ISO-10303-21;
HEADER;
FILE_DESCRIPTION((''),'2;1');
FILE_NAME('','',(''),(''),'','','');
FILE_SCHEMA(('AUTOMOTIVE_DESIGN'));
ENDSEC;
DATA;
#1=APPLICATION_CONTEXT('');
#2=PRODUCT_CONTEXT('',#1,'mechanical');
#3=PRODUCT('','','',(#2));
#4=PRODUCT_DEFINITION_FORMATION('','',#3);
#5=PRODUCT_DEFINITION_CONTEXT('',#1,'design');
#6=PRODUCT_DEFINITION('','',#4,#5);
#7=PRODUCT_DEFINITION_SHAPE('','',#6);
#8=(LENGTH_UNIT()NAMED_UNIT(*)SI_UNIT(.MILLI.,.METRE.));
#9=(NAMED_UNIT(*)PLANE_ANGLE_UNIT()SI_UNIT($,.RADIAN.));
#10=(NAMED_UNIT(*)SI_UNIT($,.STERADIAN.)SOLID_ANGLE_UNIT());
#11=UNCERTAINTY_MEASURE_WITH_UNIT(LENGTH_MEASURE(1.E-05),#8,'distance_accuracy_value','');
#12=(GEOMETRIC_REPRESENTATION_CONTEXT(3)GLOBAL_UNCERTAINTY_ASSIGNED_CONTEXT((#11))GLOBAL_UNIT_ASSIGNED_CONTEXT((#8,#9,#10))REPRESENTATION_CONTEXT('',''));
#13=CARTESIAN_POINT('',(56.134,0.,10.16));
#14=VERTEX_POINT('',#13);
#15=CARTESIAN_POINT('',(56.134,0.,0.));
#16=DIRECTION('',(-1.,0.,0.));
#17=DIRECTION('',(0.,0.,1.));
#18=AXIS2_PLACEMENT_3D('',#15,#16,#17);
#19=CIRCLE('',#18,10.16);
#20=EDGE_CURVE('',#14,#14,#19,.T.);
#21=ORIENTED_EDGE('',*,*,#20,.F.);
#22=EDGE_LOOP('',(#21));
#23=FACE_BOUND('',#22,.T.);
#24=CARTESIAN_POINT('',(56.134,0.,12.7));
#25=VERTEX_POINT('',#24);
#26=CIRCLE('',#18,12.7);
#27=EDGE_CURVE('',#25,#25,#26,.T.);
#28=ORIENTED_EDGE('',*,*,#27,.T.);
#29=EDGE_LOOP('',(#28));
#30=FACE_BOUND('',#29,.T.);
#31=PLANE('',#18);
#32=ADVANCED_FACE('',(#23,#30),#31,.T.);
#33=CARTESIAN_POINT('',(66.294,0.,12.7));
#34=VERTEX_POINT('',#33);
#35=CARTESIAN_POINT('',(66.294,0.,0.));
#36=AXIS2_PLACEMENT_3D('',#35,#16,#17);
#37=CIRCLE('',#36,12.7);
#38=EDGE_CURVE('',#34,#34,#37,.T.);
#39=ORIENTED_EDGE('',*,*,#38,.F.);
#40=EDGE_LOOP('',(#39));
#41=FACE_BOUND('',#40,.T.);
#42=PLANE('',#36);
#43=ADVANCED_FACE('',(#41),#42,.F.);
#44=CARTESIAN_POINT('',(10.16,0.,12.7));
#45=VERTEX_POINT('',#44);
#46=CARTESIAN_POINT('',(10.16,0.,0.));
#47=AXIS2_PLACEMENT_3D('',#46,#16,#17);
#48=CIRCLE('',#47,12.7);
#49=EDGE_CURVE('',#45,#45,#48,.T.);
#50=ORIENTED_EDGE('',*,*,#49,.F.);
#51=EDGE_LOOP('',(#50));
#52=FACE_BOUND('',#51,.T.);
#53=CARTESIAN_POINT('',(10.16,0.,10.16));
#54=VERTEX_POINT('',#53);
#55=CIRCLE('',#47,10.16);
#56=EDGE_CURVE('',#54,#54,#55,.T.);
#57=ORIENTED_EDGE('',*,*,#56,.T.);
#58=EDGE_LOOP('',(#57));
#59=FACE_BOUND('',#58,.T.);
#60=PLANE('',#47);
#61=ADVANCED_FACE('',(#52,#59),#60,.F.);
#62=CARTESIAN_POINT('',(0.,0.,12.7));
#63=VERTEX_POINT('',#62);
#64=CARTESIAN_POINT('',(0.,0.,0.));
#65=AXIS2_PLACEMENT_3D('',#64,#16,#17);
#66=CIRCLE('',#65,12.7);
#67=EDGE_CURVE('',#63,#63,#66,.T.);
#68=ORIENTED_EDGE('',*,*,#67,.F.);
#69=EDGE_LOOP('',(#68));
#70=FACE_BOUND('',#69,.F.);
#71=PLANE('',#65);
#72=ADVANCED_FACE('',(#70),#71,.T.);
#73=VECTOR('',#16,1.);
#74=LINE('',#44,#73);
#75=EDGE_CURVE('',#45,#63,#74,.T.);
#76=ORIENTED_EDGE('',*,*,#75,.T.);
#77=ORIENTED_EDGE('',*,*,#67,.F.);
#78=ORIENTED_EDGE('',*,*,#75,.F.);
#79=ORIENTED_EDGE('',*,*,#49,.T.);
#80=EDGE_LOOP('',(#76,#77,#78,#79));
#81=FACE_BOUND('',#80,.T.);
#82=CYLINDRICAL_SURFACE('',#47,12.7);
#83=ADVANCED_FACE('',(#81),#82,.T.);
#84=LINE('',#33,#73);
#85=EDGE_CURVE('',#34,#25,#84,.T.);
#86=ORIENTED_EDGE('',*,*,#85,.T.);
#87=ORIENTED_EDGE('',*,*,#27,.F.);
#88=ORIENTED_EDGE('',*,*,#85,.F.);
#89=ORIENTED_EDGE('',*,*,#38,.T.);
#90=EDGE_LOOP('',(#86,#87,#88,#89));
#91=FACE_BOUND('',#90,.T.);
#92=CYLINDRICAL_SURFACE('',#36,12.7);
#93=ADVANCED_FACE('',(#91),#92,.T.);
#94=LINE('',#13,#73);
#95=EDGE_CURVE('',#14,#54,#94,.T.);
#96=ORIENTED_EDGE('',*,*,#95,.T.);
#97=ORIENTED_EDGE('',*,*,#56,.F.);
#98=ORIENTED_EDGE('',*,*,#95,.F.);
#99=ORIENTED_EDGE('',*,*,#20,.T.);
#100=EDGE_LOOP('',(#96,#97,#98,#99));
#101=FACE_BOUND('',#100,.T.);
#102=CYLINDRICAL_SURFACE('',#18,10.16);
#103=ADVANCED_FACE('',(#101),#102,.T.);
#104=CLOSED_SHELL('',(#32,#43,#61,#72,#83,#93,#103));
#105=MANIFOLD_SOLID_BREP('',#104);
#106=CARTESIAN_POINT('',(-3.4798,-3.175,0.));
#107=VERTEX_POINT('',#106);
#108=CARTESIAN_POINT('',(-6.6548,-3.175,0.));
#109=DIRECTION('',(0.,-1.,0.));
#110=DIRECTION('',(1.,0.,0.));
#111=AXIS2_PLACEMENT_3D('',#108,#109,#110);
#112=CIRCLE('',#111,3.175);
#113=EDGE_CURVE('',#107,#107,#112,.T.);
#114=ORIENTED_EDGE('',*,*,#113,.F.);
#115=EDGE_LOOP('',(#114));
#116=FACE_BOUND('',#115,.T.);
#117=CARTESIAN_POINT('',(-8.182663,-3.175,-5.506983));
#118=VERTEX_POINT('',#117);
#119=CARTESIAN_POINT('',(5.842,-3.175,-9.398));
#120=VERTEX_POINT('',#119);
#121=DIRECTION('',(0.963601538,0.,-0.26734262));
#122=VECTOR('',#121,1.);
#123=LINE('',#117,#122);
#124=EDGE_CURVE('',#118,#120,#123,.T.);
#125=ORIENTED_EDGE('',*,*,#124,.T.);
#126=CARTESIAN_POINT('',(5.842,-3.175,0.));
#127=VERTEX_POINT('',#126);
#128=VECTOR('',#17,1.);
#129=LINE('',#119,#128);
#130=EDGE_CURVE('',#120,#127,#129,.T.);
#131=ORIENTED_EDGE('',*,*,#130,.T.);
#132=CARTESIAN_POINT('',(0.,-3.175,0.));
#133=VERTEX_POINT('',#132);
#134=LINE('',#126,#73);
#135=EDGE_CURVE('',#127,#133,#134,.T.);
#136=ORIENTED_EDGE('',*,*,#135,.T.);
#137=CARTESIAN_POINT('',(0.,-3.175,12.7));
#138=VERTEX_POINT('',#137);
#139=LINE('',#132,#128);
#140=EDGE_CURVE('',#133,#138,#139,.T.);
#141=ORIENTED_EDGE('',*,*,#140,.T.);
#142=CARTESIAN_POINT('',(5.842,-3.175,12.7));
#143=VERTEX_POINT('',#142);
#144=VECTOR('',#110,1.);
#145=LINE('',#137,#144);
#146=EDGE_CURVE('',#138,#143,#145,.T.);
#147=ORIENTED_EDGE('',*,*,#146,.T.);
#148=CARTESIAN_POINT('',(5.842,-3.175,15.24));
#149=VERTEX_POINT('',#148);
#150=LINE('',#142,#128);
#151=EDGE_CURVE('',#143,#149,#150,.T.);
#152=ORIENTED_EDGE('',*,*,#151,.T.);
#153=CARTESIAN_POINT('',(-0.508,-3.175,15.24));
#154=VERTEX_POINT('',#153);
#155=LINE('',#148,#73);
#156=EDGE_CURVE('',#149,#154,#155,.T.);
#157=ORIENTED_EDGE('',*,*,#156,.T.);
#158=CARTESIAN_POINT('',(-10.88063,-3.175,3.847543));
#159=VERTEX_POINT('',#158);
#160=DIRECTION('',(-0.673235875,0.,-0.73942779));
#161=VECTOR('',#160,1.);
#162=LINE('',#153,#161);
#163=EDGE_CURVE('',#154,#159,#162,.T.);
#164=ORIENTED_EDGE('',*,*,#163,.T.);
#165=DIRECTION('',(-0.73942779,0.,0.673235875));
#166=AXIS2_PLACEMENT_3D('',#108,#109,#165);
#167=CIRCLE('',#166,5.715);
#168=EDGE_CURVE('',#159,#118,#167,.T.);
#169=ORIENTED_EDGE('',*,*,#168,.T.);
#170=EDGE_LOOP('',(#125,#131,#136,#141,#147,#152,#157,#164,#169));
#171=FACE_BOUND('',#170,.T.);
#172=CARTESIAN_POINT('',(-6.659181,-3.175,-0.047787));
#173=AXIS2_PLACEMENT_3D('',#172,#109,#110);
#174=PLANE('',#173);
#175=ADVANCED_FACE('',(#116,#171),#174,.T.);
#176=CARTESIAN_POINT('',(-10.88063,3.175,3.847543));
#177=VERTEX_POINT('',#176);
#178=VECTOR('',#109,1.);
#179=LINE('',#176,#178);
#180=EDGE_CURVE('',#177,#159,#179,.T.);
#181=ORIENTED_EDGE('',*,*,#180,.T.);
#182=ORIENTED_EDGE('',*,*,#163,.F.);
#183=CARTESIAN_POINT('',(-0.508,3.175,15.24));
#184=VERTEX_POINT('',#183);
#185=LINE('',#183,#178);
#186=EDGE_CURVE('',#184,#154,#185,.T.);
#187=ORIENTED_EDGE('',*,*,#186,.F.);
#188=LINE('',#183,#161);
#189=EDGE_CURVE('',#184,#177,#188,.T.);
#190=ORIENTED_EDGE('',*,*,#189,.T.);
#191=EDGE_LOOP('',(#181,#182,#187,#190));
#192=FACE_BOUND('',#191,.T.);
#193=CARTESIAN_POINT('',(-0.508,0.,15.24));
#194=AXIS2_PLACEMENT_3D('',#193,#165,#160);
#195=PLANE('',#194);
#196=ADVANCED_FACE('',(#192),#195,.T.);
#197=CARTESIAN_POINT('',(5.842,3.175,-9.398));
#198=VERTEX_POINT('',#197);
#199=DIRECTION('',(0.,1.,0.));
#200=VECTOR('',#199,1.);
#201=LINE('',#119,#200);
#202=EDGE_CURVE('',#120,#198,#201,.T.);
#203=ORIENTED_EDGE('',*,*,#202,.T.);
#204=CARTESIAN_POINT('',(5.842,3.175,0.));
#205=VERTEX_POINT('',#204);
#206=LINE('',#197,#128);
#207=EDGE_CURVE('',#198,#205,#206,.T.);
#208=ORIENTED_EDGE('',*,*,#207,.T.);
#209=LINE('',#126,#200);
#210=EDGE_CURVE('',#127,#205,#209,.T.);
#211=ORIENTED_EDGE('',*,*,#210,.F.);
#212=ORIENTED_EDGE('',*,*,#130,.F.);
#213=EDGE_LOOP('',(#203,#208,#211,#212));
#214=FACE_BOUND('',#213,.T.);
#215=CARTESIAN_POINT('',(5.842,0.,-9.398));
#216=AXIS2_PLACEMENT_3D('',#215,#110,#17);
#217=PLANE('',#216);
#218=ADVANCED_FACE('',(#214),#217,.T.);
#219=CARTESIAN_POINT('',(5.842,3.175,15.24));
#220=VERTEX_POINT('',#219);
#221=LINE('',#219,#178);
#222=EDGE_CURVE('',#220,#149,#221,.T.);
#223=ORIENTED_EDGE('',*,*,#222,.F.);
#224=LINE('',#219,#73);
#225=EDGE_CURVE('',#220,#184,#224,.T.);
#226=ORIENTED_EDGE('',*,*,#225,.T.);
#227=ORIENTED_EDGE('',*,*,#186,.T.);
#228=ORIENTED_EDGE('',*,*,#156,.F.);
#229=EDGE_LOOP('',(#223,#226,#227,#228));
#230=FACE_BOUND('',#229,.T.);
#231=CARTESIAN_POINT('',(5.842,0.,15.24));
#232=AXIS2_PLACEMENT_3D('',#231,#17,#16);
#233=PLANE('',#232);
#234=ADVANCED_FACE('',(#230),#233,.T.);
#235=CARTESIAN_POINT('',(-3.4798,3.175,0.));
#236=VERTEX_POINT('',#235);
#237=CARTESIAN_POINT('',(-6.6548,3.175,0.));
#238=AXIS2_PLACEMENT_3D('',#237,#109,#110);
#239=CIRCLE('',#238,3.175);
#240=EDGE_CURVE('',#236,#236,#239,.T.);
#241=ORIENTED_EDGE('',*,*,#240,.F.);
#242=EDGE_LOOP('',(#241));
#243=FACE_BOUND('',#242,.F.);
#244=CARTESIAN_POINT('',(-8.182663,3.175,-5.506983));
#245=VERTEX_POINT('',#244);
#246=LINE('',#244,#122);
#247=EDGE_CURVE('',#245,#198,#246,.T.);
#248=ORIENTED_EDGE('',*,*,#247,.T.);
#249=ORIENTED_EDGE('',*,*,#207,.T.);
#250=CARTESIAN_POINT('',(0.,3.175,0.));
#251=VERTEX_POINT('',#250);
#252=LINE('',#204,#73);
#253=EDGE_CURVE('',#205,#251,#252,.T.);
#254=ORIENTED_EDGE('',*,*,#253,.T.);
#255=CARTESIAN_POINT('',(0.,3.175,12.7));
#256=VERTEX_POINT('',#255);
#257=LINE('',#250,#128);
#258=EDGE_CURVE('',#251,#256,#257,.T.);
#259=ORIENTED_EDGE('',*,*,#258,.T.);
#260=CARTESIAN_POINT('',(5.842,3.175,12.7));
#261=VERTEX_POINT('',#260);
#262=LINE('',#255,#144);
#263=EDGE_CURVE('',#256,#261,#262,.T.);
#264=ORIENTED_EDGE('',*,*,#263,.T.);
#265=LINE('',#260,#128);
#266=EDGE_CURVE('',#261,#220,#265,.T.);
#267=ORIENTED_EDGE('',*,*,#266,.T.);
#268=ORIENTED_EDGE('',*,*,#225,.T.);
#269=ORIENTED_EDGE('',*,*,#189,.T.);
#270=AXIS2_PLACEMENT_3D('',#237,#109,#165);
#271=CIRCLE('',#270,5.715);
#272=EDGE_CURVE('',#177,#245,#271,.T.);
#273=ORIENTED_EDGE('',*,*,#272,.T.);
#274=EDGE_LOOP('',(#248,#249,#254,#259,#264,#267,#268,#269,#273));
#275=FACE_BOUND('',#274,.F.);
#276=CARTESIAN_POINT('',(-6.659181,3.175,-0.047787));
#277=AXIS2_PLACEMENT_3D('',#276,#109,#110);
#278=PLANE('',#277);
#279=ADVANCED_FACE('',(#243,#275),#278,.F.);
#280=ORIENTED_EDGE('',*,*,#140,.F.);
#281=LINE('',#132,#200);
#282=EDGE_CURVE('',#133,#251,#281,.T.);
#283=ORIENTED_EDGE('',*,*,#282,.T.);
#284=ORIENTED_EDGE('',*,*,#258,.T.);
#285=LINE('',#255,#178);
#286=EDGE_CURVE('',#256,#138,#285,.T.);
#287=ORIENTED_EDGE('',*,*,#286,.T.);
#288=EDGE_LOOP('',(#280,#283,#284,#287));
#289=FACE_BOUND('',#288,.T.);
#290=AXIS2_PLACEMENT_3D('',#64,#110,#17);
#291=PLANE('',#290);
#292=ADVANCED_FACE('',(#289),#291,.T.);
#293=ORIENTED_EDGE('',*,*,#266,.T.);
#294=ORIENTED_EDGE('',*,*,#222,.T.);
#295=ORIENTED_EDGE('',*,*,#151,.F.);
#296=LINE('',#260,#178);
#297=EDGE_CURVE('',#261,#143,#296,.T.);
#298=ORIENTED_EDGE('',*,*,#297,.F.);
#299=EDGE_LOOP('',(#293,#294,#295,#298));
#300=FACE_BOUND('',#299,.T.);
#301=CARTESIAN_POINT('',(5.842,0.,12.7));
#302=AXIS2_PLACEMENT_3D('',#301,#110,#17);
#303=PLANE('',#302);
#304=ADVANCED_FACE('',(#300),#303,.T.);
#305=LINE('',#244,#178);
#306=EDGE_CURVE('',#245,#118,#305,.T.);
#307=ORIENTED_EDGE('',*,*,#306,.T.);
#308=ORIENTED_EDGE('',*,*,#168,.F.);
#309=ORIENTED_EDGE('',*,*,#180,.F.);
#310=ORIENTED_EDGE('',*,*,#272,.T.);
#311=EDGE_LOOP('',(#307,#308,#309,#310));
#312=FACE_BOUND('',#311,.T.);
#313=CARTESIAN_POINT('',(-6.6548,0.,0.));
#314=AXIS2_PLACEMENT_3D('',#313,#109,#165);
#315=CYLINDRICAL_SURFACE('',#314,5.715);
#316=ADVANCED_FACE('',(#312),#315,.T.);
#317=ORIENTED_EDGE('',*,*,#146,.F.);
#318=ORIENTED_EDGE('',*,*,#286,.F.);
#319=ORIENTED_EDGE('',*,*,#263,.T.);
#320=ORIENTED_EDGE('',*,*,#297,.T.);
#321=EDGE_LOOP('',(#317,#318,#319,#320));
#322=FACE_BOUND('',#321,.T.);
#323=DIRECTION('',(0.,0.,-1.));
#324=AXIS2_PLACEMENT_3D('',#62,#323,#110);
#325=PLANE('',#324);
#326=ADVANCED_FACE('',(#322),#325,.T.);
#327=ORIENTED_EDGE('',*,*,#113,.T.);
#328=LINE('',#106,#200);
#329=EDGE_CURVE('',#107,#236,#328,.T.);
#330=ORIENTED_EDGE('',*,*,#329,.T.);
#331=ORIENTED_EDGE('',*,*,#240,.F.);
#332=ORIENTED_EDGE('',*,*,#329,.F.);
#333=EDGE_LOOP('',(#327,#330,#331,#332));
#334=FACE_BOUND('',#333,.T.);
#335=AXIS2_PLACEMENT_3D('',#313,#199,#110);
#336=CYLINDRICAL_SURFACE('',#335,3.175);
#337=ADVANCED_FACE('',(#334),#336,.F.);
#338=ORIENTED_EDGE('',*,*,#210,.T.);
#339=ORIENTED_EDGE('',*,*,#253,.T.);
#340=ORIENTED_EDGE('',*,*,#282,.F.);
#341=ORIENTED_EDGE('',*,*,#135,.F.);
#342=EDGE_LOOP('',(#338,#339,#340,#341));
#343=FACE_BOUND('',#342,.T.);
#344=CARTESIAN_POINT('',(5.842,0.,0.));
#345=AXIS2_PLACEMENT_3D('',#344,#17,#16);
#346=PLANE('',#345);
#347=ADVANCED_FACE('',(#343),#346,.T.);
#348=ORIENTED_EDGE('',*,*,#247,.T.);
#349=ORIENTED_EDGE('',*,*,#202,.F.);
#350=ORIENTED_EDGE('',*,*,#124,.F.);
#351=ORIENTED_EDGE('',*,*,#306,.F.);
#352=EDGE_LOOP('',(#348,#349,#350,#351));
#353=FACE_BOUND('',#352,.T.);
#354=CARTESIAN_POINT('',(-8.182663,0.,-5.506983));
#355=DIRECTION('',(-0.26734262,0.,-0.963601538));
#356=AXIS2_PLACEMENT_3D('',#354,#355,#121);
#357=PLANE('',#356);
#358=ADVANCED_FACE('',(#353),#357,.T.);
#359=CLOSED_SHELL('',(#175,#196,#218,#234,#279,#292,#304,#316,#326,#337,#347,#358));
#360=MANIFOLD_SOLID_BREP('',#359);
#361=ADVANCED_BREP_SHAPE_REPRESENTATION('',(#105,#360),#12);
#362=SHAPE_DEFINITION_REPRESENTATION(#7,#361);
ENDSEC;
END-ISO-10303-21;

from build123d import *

# Parameters (mm, degrees)
F0_W     = 5.842
F0_H     = 12.7
F0_R     = 3.175
F2_DEPTH = 6.35
F4_DEPTH = 3.175


# Not quite as in the source:
# - a feature of the source that left no trace in its solid (it failed there, or was rolled back) is left out


with BuildPart() as f1:
    # F0 (on Front) → F1 (revolve)
    with BuildSketch(Plane.XZ):
        with Locations((2.921, 6.35)):
            Rectangle(F0_W, F0_H)
        Polygon((5.842, 12.7), (5.842, 0), (66.294, 0), (66.294, 12.7), (56.134, 12.7), (56.134, 10.16), (10.16, 10.16), (10.16, 12.7), align=None)
    revolve(axis=Axis((33.147, 0, 0), (-1, 0, 0)))


with BuildPart() as f2:
    # F0 (on Front) → F2 (new body)
    with BuildSketch(Plane.XZ):
        with BuildLine():
            Line((-0.9398, 0), (0, 0))
            Line((0, 0), (0, 12.7))
            Line((0, 12.7), (5.842, 12.7))
            Line((5.842, 12.7), (5.842, 15.24))
            Line((5.842, 15.24), (-0.508, 15.24))
            Line((-0.508, 15.24), (-10.8806298187, 3.8475430269))
            ThreePointArc((-10.8806298187, 3.8475430269), (-4.5919612295, 5.3297205562), (-0.9398, 0))
        make_face()
        with BuildLine():
            ThreePointArc((-8.1826630726, -5.5069827884), (-3.1957909266, -4.5493385486), (-0.9398, 0))
            ThreePointArc((-0.9398, 0), (-4.5919612295, 5.3297205562), (-10.8806298187, 3.8475430269))
            ThreePointArc((-10.8806298187, 3.8475430269), (-12.1459778134, -1.5837270034), (-8.1826630726, -5.5069827884))
        make_face()
        with Locations((-6.6548, 0)):
            Circle(F0_R, mode=Mode.SUBTRACT)
        with BuildLine():
            Line((5.842, 0), (0, 0))
            Line((0, 0), (-0.9398, 0))
            ThreePointArc((-0.9398, 0), (-3.1957909266, -4.5493385486), (-8.1826630726, -5.5069827884))
            Line((-8.1826630726, -5.5069827884), (5.842, -9.398))
            Line((5.842, -9.398), (5.842, 0))
        make_face()
    extrude(amount=F2_DEPTH)


with BuildPart() as f4:
    # F0 (on Front) → F4 (new body, symmetric)
    with BuildSketch(Plane.XZ):
        with BuildLine():
            ThreePointArc((-8.1826630726, -5.5069827884), (-3.1957909266, -4.5493385486), (-0.9398, 0))
            ThreePointArc((-0.9398, 0), (-4.5919612295, 5.3297205562), (-10.8806298187, 3.8475430269))
            ThreePointArc((-10.8806298187, 3.8475430269), (-12.1459778134, -1.5837270034), (-8.1826630726, -5.5069827884))
        make_face()
        with Locations((-6.6548, 0)):
            Circle(F0_R, mode=Mode.SUBTRACT)
        with BuildLine():
            Line((-0.9398, 0), (0, 0))
            Line((0, 0), (0, 12.7))
            Line((0, 12.7), (5.842, 12.7))
            Line((5.842, 12.7), (5.842, 15.24))
            Line((5.842, 15.24), (-0.508, 15.24))
            Line((-0.508, 15.24), (-10.8806298187, 3.8475430269))
            ThreePointArc((-10.8806298187, 3.8475430269), (-4.5919612295, 5.3297205562), (-0.9398, 0))
        make_face()
        with BuildLine():
            Line((5.842, 0), (0, 0))
            Line((0, 0), (-0.9398, 0))
            ThreePointArc((-0.9398, 0), (-3.1957909266, -4.5493385486), (-8.1826630726, -5.5069827884))
            Line((-8.1826630726, -5.5069827884), (5.842, -9.398))
            Line((5.842, -9.398), (5.842, 0))
        make_face()
    extrude(amount=F4_DEPTH, both=True)


solid = Compound([f1.part, f4.part])
